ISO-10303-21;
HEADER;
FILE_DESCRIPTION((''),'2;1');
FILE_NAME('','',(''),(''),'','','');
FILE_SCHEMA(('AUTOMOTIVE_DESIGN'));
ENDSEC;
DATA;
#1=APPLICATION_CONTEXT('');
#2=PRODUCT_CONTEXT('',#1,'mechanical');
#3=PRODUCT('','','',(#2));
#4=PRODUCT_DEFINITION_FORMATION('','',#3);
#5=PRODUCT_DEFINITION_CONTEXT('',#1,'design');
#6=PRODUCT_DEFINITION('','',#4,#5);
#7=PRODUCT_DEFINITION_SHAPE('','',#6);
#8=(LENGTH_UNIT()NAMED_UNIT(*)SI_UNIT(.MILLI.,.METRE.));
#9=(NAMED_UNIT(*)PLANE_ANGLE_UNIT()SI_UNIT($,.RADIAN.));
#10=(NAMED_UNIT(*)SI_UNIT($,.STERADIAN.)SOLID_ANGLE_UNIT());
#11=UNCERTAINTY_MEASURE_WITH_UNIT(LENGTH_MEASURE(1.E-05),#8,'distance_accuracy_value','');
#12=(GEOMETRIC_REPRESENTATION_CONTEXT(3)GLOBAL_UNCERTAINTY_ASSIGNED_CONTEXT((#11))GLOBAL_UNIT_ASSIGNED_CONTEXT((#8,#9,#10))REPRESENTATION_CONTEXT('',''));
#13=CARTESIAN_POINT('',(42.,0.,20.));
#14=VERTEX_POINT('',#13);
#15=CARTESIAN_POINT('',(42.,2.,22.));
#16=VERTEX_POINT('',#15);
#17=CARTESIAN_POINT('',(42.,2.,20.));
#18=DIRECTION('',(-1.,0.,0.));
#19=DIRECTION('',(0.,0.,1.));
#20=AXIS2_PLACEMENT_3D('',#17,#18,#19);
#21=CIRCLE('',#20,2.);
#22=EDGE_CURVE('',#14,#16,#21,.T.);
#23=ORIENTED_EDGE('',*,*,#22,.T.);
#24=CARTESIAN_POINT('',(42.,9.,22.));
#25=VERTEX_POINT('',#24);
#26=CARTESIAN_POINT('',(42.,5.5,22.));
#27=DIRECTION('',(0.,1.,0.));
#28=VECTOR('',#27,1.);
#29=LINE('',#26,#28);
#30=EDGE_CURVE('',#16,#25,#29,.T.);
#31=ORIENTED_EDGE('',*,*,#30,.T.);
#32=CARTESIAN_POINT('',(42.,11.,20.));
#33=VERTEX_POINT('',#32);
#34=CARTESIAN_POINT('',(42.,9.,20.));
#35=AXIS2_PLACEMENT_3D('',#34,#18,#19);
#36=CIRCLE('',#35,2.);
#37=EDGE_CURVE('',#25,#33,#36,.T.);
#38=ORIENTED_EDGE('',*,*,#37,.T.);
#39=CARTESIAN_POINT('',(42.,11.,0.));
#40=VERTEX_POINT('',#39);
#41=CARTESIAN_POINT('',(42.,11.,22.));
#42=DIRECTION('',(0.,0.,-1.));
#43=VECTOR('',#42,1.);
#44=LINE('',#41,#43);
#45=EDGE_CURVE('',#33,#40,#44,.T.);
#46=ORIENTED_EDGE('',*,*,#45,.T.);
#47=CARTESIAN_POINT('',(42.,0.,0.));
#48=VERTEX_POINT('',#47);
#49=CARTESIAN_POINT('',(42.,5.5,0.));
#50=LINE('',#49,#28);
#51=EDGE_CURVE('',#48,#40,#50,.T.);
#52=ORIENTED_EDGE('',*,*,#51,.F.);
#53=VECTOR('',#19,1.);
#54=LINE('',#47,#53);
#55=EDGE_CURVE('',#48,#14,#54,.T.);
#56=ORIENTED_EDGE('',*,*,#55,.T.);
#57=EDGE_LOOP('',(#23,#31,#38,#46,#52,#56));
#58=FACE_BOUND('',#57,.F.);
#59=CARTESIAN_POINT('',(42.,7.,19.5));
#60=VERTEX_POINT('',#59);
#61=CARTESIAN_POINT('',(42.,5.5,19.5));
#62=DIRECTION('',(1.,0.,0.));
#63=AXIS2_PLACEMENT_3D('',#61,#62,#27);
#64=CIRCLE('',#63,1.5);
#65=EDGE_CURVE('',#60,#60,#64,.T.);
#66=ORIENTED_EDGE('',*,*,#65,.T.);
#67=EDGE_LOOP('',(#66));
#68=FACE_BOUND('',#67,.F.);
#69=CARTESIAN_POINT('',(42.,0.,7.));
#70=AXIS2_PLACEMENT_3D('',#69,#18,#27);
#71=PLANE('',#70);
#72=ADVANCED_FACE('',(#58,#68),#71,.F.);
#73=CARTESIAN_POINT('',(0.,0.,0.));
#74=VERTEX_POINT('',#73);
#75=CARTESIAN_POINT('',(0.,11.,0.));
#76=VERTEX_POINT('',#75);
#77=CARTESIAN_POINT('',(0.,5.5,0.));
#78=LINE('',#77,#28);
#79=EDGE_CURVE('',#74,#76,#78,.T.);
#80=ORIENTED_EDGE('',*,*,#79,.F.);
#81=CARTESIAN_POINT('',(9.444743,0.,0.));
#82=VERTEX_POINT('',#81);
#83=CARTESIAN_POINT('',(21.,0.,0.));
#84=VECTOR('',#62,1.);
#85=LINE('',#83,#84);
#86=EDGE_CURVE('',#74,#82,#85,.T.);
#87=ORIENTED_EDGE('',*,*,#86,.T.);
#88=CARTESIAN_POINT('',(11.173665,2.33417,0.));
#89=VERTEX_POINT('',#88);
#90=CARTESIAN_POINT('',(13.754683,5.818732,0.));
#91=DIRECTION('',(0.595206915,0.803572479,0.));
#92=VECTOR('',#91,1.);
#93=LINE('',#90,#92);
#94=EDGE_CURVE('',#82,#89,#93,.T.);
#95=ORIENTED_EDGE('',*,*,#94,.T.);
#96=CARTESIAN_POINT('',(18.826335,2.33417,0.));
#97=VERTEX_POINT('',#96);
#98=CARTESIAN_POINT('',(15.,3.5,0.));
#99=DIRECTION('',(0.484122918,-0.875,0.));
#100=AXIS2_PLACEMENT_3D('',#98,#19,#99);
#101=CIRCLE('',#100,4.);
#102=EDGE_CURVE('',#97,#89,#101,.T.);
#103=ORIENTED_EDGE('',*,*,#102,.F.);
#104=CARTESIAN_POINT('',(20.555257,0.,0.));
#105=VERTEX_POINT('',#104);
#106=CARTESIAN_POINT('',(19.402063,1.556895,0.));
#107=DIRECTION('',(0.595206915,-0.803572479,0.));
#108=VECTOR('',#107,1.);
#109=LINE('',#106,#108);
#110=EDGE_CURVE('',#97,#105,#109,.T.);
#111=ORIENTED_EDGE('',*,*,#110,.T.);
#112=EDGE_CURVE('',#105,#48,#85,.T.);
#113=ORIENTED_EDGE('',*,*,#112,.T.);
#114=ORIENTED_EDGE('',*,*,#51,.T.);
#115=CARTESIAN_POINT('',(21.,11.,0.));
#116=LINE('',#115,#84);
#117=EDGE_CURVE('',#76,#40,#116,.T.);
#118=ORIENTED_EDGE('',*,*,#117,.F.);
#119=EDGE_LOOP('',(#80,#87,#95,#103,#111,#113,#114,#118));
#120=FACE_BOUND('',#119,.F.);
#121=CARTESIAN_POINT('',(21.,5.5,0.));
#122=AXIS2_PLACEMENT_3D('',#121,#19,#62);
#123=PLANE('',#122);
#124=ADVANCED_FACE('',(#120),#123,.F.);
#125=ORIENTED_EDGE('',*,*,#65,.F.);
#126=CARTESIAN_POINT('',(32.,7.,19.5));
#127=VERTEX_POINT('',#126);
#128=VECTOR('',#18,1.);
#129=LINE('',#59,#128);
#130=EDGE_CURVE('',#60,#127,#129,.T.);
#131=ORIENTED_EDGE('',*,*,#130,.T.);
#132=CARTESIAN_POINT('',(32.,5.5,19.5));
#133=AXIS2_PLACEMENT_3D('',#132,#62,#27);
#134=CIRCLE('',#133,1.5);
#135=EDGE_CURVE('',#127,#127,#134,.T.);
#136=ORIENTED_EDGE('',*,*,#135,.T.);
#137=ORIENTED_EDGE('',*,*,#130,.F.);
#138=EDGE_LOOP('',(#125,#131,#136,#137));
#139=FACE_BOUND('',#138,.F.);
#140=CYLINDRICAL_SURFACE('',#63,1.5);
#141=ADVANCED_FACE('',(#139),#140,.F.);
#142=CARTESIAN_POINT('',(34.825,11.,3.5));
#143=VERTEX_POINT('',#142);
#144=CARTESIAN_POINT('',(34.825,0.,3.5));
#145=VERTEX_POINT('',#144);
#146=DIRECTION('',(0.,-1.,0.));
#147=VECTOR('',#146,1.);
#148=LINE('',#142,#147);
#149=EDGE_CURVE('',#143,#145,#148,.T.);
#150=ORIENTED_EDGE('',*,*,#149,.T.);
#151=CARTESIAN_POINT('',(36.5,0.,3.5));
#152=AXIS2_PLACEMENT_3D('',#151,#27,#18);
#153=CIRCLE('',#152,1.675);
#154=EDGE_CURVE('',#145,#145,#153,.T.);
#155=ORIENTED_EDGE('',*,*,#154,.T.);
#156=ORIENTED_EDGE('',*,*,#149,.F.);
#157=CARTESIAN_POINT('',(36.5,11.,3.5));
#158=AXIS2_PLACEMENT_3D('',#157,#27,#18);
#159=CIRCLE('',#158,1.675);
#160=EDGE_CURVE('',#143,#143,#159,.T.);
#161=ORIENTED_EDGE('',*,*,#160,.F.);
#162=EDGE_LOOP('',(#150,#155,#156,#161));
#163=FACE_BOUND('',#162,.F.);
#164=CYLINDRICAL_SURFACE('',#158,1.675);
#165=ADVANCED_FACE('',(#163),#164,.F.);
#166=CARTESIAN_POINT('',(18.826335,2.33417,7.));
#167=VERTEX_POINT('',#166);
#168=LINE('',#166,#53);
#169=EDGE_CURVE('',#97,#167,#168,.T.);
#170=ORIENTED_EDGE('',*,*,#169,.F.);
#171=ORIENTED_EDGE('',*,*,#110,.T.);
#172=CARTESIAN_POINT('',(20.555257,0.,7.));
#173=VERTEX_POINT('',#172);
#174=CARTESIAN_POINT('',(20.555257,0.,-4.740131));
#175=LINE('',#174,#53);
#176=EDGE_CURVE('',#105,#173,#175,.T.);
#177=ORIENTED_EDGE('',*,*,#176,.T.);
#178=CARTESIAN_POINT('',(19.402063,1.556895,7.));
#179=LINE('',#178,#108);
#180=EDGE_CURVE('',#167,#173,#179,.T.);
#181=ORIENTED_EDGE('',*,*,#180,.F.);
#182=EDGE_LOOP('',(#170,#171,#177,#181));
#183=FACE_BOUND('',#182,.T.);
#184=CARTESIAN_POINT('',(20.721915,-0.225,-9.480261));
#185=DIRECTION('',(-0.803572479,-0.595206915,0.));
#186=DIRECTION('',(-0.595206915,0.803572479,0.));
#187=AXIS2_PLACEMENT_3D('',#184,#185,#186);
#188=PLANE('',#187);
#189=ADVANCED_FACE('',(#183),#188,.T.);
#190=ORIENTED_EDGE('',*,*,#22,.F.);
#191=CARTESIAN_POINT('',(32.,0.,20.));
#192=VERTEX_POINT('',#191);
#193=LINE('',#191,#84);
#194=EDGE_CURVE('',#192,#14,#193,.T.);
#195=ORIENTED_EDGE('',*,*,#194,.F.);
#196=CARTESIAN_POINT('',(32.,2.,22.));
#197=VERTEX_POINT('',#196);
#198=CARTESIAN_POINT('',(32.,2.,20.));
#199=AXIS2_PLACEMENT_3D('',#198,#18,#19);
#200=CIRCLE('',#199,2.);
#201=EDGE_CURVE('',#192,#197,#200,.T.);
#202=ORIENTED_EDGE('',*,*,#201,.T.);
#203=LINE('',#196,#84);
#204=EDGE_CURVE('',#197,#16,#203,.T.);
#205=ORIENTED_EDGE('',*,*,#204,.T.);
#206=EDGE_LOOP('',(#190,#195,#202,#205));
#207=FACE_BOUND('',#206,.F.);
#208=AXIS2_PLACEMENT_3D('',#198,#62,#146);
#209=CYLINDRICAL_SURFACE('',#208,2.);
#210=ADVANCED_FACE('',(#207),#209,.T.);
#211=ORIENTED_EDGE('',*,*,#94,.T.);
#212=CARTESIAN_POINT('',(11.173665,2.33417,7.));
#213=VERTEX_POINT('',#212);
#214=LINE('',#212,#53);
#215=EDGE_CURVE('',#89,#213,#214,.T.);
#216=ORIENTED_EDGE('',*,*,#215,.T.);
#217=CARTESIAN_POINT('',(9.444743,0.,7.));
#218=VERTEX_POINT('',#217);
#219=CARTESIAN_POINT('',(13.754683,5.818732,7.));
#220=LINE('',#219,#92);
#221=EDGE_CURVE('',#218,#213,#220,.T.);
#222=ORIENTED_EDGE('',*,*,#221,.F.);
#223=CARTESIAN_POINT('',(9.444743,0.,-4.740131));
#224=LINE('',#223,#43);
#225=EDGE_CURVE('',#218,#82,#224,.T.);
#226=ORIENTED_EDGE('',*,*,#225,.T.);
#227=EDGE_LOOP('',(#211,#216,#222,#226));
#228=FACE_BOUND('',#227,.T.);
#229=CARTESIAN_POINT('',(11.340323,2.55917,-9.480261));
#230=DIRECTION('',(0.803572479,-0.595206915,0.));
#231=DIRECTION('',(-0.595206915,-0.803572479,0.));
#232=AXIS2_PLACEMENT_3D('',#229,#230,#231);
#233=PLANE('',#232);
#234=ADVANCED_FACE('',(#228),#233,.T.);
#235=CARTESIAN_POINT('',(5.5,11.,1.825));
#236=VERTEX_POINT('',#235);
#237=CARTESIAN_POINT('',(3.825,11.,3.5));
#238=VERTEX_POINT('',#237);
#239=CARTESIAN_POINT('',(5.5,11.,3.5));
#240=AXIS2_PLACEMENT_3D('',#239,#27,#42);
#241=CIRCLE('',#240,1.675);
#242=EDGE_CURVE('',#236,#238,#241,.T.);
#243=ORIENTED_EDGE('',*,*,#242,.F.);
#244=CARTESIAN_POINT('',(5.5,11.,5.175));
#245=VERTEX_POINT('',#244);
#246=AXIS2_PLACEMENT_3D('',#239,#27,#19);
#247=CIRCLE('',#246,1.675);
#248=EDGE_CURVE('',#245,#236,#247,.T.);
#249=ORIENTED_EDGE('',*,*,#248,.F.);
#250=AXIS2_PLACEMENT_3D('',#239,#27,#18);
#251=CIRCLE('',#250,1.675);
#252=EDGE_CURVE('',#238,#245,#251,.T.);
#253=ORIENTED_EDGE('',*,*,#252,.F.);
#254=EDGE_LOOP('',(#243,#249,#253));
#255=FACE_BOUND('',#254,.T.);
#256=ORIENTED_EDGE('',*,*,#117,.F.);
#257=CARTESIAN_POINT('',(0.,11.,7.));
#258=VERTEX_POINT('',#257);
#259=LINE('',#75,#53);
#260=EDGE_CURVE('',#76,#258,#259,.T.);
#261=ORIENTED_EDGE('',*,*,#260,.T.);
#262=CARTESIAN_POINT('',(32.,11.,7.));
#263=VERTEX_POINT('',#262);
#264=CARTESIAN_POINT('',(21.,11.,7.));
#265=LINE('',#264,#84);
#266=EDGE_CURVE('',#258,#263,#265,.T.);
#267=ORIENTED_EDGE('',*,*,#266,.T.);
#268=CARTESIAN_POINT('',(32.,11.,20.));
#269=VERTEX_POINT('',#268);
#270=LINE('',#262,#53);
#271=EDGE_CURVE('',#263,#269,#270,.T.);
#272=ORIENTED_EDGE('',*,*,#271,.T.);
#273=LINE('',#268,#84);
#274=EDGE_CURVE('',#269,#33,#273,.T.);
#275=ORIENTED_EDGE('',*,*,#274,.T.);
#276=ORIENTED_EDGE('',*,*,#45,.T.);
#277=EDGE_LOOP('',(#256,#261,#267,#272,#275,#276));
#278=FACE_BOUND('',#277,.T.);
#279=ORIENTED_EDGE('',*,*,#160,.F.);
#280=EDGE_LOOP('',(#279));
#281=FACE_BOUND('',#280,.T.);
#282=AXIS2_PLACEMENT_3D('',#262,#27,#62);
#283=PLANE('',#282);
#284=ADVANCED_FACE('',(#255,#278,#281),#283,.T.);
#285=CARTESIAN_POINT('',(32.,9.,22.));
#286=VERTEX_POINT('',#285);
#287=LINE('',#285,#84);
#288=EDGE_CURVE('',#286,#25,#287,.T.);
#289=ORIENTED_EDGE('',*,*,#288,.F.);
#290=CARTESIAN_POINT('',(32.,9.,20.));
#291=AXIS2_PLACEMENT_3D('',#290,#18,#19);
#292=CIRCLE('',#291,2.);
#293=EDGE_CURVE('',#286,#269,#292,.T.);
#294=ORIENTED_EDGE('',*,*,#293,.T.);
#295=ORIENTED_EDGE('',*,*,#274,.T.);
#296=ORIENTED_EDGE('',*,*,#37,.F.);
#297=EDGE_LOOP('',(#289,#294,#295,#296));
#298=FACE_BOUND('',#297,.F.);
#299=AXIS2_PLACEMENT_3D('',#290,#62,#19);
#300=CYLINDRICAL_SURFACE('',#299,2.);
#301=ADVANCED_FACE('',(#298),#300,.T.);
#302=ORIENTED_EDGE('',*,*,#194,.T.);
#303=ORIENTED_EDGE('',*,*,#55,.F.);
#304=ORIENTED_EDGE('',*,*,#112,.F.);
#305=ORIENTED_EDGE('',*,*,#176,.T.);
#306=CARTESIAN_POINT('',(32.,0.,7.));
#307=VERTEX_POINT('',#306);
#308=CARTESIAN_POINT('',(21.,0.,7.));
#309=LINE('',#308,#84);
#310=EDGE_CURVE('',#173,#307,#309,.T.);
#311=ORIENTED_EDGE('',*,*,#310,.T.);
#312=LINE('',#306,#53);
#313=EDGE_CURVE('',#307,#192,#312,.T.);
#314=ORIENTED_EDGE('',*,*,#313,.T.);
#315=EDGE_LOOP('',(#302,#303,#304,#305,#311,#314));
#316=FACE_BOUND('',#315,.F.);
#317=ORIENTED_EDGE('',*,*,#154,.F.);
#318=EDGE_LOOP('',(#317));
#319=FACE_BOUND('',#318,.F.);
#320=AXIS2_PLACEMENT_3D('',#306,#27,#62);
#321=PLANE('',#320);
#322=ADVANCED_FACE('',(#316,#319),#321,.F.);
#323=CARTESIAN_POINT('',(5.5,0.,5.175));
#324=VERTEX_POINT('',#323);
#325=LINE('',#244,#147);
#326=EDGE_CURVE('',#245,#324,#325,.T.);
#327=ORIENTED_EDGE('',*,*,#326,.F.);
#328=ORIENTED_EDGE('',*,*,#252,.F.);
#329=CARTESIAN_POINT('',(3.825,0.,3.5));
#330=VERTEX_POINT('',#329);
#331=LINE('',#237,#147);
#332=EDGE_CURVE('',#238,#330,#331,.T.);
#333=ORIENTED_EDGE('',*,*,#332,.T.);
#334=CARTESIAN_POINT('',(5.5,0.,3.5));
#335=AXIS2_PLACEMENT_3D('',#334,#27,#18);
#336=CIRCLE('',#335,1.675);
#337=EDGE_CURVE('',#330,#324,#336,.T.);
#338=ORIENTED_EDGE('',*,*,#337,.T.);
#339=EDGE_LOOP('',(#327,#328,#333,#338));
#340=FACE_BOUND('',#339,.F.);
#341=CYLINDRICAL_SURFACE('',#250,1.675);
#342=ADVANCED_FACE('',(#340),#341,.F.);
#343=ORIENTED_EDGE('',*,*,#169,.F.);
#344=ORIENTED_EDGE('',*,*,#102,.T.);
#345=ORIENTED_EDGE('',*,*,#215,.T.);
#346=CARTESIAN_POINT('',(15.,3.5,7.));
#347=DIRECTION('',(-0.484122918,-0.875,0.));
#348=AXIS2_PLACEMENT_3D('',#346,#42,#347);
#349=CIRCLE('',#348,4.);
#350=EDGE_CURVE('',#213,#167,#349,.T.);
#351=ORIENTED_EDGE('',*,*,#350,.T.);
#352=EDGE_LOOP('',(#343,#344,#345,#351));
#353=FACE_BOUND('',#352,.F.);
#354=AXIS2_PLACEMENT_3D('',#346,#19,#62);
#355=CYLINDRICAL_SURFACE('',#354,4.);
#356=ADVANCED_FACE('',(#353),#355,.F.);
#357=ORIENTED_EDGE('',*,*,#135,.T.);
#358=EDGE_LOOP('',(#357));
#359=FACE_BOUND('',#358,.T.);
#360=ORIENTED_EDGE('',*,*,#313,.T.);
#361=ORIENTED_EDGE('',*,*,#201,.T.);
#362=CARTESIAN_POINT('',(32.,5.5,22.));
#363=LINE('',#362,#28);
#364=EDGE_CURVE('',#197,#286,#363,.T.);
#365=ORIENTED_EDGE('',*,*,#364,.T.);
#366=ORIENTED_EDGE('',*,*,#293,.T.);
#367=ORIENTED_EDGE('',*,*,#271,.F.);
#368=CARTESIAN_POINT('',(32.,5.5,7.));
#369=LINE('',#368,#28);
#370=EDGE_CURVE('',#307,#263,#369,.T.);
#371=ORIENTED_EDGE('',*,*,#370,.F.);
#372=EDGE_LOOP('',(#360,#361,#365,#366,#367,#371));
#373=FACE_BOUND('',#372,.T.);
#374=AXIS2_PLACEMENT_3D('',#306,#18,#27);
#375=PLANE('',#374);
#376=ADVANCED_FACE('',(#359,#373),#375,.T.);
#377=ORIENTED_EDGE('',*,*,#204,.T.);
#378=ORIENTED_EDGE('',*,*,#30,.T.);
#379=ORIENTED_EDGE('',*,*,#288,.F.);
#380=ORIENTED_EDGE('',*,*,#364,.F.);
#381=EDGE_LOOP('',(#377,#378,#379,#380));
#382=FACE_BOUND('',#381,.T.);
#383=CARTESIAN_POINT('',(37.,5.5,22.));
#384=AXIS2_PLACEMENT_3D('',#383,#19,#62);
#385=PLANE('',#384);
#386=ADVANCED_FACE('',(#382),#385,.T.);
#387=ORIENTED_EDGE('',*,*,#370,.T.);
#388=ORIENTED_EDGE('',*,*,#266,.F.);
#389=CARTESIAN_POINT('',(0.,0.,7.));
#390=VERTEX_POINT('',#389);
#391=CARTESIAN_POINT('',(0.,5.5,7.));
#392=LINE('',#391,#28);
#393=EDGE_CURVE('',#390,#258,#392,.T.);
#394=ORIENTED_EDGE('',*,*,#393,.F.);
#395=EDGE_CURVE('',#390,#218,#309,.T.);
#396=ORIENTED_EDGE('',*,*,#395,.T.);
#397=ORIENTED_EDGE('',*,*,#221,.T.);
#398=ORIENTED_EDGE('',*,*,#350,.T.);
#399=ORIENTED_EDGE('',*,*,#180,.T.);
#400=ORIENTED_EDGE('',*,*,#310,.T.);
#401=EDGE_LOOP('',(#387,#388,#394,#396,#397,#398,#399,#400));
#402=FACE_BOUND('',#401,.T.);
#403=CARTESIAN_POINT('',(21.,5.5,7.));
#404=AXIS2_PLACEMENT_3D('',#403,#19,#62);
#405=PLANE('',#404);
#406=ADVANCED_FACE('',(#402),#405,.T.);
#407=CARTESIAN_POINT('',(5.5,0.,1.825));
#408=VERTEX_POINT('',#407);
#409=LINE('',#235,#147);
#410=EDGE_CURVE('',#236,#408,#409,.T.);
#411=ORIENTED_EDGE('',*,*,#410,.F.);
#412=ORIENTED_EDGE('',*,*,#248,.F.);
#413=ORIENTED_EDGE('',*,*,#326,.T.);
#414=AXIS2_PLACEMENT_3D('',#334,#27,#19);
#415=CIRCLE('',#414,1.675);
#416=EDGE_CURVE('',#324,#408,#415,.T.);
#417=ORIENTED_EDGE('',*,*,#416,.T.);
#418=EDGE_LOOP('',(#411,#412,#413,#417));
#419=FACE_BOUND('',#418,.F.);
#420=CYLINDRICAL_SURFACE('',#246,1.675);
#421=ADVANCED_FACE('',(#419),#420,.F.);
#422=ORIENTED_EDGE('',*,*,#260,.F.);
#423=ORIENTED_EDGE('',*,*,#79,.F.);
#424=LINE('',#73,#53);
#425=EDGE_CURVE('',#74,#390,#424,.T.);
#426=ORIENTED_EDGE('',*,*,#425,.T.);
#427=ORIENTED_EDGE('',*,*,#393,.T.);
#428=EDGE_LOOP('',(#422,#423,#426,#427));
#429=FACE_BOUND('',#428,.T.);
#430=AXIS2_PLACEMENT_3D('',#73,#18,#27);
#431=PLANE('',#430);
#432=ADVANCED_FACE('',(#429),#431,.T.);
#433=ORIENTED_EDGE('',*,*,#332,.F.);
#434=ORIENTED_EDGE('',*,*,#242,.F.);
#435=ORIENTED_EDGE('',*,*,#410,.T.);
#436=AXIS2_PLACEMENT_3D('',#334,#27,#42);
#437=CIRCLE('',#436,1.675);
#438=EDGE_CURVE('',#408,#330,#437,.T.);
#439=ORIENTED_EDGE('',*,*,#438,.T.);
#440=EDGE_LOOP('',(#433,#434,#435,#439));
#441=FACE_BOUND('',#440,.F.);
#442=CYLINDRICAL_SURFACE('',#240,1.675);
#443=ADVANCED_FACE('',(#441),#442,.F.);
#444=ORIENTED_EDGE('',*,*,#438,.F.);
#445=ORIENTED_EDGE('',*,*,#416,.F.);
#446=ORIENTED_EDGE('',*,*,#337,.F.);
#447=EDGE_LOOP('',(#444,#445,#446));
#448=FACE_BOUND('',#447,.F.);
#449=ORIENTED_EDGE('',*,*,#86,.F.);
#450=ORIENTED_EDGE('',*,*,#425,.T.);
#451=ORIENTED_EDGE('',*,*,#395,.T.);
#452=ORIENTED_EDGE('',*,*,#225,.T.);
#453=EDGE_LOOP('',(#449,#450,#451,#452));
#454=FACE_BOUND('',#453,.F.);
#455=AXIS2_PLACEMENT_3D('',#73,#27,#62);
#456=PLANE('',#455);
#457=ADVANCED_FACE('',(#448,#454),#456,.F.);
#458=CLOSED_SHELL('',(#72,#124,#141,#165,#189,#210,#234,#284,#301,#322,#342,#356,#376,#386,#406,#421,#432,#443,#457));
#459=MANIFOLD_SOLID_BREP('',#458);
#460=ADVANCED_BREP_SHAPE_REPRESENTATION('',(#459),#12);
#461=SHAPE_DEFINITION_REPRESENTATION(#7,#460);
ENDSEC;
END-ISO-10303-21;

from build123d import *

# Parameters (mm, degrees)
F1_W        = 42
F1_H        = 11
F2_DEPTH    = 7
F3_R        = 4
F4_DEPTH    = 25
F5_T1_DEPTH = 25.9605224852
F7_DEPTH    = 25
F8_W        = 10
F8_H        = 11
F9_DEPTH    = 15
F10_R       = 1.5
F11_DEPTH   = 25
F12_R       = 2


# Not quite as in the source:
# - a fillet or chamfer that OpenCascade refuses, or shapes differently, is made with other operations: its cross-section is extruded or revolved along the edge and cut away or added


with BuildPart() as f2:
    # F1 (on Top) → F2 (new body)
    with BuildSketch(Plane.XY):
        with Locations((21, 5.5)):
            Rectangle(F1_W, F1_H)
    extrude(amount=F2_DEPTH)

    # F3 (on face) → F4 (cut)
    with BuildSketch(Plane.XY.offset(7)):
        with Locations((15, 3.5)):
            Circle(F3_R)
    extrude(amount=-F4_DEPTH, mode=Mode.SUBTRACT)

    # F5: chamfer of 7 on 2 edges, made by hand

    # F5_s2 → F5_t1 (cut)
    with BuildSketch(Plane.XY.offset(-9.4802612426)):
        with BuildLine():
            Line((20.721915214, -0.225000294), (18.6596772309, 2.5591704653))
            Line((18.6596772309, 2.5591704653), (18.5257555, 2.5999745093))
            ThreePointArc((18.5257555, 2.5999745093), (18.0236462707, 1.1005910665), (16.8687144645, 0.1225))
            Line((16.8687144645, 0.1225), (16.9364916731, -0.14))
            ThreePointArc((16.9364916731, -0.14), (18.8292034436, -0.14), (20.721915214, -0.365000294))
            Line((20.721915214, -0.365000294), (20.721915214, -0.225000294))
        make_face()
        with BuildLine():
            Line((11.3403227691, 2.5591704653), (9.278084786, -0.225000294))
            Line((9.278084786, -0.225000294), (9.278084786, -0.365000294))
            ThreePointArc((9.278084786, -0.365000294), (11.1707965564, -0.14), (13.0635083269, -0.14))
            Line((13.0635083269, -0.14), (13.1312855355, 0.1225))
            ThreePointArc((13.1312855355, 0.1225), (11.9763537293, 1.1005910665), (11.4742445, 2.5999745093))
            Line((11.4742445, 2.5999745093), (11.3403227691, 2.5591704653))
        make_face()
    extrude(amount=F5_T1_DEPTH, mode=Mode.SUBTRACT)

    # F6 (on face) → F7 (cut)
    with BuildSketch(Plane(origin=(0, 11, 0), x_dir=(-1, 0, 0), z_dir=(0, 1, 0))):
        with BuildLine():
            Line((-5.5, 3.5), (-3.825, 3.5))
            ThreePointArc((-3.825, 3.5), (-4.3155961415, 4.6844038585), (-5.5, 5.175))
            Line((-5.5, 5.175), (-5.5, 3.5))
        make_face()
        with BuildLine():
            ThreePointArc((-5.5, 1.825), (-4.3155961415, 2.3155961415), (-3.825, 3.5))
            Line((-3.825, 3.5), (-5.5, 3.5))
            Line((-5.5, 3.5), (-5.5, 1.825))
        make_face()
        with BuildLine():
            Line((-5.5, 3.5), (-5.5, 5.175))
            ThreePointArc((-5.5, 5.175), (-7.175, 3.5), (-5.5, 1.825))
            Line((-5.5, 1.825), (-5.5, 3.5))
        make_face()
        with BuildLine():
            ThreePointArc((-38.175, 3.5), (-36.5, 1.825), (-34.825, 3.5))
            ThreePointArc((-34.825, 3.5), (-36.5, 5.175), (-38.175, 3.5))
        make_face()
    extrude(amount=-F7_DEPTH, mode=Mode.SUBTRACT)

    # F8 (on face) → F9 (join)
    with BuildSketch(Plane.XY.offset(7)):
        with Locations((37, 5.5)):
            Rectangle(F8_W, F8_H)
    extrude(amount=F9_DEPTH)

    # F10 (on face) → F11 (cut)
    with BuildSketch(Plane.YZ.offset(42)):
        with Locations((5.5, 19.5)):
            Circle(F10_R)
    extrude(amount=-F11_DEPTH, mode=Mode.SUBTRACT)

    # F12
    f12_edges = [f2.edges().sort_by_distance(p)[0] for p in [
        (37, 0, 22),
        (37, 11, 22),
    ]]
    fillet(f12_edges, radius=F12_R)


solid = f2.part
